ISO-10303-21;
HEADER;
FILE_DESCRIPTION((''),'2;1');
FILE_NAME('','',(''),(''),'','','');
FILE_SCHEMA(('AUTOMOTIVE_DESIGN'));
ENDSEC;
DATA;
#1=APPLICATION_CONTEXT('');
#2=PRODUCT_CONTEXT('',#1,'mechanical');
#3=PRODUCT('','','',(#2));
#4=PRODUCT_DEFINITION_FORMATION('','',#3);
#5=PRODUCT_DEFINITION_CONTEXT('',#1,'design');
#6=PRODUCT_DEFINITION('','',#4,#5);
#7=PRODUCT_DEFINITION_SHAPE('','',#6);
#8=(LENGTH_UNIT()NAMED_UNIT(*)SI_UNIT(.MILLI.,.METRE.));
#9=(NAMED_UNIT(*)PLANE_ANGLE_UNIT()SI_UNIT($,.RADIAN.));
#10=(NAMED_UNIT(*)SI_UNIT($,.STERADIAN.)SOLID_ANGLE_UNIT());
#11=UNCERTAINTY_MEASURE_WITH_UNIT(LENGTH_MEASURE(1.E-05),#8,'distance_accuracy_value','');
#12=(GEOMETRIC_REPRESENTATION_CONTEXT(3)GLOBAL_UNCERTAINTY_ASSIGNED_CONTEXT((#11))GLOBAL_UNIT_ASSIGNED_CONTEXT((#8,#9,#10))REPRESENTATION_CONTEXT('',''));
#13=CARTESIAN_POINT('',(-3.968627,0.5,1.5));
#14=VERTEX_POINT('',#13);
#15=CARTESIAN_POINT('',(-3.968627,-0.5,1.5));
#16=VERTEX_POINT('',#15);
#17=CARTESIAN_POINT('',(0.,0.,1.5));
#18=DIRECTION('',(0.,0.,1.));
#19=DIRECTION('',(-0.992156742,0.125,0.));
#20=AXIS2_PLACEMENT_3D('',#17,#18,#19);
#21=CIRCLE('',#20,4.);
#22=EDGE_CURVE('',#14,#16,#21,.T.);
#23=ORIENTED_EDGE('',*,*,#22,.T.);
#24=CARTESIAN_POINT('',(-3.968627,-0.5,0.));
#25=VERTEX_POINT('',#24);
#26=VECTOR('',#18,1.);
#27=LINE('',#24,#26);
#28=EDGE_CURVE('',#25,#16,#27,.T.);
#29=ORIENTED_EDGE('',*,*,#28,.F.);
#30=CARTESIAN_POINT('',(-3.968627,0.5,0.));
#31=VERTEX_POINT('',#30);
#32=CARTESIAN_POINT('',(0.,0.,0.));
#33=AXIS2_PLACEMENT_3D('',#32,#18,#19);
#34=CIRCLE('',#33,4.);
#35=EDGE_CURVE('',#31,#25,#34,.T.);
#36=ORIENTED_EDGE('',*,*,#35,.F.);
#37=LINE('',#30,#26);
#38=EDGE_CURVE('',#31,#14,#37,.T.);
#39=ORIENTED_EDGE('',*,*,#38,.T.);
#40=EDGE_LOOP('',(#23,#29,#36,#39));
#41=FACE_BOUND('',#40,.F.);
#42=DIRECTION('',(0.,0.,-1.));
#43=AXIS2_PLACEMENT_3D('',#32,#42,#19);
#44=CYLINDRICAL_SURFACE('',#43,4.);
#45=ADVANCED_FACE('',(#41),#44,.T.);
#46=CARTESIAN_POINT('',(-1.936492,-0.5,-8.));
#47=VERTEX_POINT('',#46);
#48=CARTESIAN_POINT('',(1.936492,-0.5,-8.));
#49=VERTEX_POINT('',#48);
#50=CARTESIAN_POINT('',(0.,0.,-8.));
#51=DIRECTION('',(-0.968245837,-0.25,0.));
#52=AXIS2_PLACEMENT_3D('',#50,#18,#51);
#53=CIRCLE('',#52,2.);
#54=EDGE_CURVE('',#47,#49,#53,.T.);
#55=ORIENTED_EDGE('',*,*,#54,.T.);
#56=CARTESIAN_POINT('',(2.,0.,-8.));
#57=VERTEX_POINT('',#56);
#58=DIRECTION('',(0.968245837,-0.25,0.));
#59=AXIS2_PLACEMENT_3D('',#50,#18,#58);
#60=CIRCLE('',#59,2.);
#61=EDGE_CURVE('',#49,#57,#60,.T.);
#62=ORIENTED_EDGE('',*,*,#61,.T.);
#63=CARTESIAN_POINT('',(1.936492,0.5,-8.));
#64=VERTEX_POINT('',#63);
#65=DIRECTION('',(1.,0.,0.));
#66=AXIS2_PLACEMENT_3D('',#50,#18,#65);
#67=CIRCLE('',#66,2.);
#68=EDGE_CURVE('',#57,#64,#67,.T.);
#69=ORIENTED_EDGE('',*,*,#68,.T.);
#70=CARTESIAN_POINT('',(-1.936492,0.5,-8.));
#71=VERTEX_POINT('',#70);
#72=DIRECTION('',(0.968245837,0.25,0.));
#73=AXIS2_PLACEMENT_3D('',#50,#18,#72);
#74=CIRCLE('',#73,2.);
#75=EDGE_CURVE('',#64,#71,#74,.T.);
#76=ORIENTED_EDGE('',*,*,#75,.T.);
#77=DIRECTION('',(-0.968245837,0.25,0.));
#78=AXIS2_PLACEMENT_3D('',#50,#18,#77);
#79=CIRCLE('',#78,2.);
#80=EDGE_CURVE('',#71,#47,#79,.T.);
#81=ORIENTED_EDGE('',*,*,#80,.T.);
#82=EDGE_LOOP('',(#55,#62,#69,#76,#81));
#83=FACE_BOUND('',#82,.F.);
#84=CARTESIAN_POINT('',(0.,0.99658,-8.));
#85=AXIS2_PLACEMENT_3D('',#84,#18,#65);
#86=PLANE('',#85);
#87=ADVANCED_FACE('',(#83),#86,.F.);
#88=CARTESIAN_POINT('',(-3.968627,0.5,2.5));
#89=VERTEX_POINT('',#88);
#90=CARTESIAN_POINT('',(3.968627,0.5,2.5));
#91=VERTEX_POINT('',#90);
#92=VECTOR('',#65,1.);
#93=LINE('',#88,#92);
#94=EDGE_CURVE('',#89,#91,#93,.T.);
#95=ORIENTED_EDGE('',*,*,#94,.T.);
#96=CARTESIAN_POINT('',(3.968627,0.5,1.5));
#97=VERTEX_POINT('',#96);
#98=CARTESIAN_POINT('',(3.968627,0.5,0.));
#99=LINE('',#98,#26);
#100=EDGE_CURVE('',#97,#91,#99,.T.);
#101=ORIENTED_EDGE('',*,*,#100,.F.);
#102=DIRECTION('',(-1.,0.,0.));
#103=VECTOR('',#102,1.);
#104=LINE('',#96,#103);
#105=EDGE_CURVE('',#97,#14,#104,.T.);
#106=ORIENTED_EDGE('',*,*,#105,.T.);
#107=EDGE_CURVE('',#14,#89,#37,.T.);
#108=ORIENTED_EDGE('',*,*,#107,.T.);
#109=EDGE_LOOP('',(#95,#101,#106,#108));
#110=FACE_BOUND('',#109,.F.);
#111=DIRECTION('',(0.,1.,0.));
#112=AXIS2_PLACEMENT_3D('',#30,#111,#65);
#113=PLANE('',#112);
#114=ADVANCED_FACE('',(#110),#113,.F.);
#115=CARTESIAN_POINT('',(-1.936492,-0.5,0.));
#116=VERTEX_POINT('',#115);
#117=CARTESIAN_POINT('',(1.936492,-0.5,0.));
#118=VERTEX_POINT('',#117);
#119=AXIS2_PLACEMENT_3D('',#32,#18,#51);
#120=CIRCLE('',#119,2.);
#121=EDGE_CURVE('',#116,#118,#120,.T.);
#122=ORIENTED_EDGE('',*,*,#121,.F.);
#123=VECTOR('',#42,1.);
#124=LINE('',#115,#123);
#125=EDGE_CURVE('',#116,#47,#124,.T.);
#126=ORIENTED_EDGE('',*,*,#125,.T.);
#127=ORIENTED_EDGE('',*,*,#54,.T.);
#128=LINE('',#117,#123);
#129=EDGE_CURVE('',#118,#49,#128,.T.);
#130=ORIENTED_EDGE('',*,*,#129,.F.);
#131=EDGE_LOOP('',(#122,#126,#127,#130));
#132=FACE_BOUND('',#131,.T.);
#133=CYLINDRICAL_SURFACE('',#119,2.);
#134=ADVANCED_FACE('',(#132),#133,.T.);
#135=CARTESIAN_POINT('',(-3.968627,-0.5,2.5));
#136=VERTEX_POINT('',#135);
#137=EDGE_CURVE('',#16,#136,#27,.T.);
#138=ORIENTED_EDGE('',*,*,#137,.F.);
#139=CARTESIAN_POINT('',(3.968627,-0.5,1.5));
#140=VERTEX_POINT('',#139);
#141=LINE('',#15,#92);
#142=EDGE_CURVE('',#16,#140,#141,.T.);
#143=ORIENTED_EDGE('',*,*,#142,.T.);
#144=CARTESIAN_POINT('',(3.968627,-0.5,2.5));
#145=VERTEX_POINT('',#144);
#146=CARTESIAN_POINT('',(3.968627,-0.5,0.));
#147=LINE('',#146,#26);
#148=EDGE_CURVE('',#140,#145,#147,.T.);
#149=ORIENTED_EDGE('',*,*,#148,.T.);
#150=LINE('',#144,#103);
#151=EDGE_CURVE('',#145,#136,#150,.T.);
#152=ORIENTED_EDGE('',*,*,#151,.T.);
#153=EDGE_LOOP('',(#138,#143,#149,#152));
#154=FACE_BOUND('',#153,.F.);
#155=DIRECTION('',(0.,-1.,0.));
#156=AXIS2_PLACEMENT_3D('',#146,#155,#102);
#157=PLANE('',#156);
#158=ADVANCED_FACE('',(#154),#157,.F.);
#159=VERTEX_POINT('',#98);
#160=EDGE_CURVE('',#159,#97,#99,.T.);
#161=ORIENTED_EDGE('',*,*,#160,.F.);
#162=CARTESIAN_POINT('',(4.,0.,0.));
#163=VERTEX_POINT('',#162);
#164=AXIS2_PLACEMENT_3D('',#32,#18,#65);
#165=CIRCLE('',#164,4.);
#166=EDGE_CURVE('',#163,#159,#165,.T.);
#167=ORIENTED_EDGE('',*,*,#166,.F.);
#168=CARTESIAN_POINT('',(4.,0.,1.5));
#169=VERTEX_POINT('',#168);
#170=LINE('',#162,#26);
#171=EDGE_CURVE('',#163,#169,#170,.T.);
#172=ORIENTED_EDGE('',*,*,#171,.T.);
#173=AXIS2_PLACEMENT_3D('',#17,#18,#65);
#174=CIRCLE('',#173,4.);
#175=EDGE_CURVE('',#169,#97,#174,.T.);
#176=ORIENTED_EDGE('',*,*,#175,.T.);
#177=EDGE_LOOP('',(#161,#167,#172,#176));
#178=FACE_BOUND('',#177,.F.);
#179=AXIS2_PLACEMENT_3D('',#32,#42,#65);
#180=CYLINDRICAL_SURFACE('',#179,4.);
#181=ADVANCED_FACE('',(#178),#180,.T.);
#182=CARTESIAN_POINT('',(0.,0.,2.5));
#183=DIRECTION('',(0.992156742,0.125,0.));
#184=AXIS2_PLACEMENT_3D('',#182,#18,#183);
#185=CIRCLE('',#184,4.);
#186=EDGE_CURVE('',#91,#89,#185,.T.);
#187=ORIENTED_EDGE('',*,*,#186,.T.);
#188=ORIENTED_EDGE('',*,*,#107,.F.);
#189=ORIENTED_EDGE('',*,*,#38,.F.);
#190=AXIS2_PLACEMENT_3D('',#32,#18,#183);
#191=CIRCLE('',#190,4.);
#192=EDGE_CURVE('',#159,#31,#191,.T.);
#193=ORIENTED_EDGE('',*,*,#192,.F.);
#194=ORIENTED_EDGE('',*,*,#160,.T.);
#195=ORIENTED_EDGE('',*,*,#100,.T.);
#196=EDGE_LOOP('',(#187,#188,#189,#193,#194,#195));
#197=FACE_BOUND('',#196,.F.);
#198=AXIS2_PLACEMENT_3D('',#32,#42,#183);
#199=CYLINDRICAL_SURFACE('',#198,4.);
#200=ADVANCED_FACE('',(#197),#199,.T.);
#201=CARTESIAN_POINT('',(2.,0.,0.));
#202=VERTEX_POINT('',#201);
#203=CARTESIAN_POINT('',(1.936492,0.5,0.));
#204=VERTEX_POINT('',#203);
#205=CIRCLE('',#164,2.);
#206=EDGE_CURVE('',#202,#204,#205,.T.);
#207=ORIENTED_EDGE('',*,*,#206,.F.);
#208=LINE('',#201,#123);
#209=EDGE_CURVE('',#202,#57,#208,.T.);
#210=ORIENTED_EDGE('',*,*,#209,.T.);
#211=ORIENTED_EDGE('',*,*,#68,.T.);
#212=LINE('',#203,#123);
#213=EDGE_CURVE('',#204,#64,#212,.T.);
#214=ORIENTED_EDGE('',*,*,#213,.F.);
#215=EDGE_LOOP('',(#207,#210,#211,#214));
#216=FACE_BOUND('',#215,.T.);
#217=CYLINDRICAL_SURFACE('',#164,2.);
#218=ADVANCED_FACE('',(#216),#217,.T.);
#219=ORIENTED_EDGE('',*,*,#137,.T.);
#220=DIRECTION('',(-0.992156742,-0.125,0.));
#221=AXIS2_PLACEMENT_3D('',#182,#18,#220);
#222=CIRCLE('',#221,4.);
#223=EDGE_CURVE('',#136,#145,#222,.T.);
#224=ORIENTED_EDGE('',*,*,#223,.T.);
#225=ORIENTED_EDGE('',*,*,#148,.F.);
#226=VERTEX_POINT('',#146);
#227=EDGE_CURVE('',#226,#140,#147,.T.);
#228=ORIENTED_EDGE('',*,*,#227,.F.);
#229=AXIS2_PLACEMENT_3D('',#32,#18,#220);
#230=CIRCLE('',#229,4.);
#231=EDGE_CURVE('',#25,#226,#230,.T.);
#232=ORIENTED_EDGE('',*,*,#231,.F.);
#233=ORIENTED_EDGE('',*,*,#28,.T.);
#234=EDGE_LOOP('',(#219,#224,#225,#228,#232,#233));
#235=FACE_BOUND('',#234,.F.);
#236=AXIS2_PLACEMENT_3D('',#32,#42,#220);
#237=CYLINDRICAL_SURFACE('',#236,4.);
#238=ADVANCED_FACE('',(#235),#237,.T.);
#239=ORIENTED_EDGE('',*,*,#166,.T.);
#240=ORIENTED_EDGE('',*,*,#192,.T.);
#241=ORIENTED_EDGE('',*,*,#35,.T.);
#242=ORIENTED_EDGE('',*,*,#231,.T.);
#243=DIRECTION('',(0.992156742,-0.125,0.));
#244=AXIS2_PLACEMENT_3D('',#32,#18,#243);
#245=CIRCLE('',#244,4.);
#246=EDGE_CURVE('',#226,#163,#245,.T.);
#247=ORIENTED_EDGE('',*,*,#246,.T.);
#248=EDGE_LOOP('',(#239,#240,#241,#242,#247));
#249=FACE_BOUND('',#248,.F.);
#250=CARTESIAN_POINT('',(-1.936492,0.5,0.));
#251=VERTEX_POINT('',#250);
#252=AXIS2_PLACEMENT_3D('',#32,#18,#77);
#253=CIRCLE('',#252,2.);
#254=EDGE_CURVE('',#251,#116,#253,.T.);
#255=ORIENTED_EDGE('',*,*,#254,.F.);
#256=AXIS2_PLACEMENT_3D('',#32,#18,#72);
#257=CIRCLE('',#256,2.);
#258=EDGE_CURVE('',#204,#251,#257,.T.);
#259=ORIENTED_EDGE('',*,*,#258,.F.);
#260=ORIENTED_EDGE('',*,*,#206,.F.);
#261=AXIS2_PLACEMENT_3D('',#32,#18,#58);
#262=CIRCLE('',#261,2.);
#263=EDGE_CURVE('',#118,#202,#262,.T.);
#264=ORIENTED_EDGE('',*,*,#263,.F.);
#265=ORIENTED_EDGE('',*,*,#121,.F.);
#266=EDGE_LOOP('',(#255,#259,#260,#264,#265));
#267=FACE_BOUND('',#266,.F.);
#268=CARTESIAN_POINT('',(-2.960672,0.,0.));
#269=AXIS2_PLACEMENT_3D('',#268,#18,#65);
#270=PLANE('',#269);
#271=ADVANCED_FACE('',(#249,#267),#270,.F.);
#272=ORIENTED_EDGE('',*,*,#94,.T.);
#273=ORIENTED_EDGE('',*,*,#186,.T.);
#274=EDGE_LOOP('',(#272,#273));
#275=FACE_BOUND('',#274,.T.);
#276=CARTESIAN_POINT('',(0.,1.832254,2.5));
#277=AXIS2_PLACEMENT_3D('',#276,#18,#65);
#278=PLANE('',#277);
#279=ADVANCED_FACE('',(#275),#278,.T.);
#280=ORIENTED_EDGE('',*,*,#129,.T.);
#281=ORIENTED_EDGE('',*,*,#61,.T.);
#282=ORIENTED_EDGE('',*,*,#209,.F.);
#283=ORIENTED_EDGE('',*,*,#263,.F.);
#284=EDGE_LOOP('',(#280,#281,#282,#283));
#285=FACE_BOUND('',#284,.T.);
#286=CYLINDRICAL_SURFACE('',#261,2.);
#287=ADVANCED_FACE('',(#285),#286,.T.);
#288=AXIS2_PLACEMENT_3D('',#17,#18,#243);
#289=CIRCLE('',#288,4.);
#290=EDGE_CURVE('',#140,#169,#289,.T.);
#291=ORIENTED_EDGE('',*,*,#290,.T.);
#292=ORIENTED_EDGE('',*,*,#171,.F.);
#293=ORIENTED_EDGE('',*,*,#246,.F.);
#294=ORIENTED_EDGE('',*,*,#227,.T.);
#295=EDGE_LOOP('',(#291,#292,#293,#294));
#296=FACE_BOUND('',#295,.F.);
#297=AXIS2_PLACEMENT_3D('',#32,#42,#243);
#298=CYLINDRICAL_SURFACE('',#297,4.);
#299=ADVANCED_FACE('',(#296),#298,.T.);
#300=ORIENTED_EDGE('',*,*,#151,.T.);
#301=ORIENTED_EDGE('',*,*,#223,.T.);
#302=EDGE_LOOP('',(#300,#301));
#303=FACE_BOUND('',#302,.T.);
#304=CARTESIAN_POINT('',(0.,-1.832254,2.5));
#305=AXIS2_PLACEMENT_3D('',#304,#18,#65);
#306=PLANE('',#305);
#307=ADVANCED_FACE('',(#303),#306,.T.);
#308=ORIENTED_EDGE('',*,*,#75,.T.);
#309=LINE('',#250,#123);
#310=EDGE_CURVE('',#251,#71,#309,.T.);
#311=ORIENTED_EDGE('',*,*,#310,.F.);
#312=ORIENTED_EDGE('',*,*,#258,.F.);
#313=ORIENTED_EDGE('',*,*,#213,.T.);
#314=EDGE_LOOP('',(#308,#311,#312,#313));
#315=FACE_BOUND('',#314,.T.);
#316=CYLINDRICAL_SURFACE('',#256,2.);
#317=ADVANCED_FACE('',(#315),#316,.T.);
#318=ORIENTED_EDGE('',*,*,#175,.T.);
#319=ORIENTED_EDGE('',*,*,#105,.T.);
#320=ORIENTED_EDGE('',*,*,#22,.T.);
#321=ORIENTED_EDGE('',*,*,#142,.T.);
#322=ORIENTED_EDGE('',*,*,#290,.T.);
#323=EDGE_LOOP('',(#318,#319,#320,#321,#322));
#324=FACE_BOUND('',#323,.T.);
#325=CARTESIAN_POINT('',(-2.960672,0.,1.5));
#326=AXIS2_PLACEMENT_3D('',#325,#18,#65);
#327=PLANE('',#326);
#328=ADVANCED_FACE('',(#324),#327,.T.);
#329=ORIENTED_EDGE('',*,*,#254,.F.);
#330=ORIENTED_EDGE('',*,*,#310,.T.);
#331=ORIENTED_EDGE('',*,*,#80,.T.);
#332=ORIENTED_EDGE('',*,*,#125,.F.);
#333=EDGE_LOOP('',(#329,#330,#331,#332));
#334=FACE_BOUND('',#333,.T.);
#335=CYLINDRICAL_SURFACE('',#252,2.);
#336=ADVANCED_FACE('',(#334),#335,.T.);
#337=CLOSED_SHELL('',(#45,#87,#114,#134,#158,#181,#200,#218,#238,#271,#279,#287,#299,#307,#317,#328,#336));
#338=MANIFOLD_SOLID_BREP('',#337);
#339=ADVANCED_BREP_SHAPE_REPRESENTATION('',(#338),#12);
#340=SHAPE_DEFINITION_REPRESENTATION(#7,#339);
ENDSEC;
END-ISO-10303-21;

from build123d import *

# Parameters (mm, degrees)
F1_DEPTH = 8
F2_DEPTH = 2.5
F3_DEPTH = 1.5


# Not quite as in the source:
# - a feature names something its author has since deleted; it is built from what else it names


with BuildPart() as f1:
    # F0 (on Top) → F1 (new body)
    with BuildSketch(Plane.XY):
        with BuildLine():
            Line((-1.9364916731, 0.5), (1.9364916731, 0.5))
            ThreePointArc((1.9364916731, 0.5), (0, 2), (-1.9364916731, 0.5))
        make_face()
        with BuildLine():
            ThreePointArc((2, 0), (1.9840593925, 0.252008585), (1.9364916731, 0.5))
            Line((1.9364916731, 0.5), (-1.9364916731, 0.5))
            ThreePointArc((-1.9364916731, 0.5), (-2, 0), (-1.9364916731, -0.5))
            Line((-1.9364916731, -0.5), (1.9364916731, -0.5))
            ThreePointArc((1.9364916731, -0.5), (1.9840593925, -0.252008585), (2, 0))
        make_face()
        with BuildLine():
            ThreePointArc((-1.9364916731, -0.5), (0, -2), (1.9364916731, -0.5))
            Line((1.9364916731, -0.5), (-1.9364916731, -0.5))
        make_face()
    extrude(amount=-F1_DEPTH)

    # F0 (on Top) → F2 (join)
    with BuildSketch(Plane.XY):
        with BuildLine():
            ThreePointArc((-3.9686269666, -0.5), (0, -4), (3.9686269666, -0.5))
            Line((3.9686269666, -0.5), (1.9364916731, -0.5))
            ThreePointArc((1.9364916731, -0.5), (0, -2), (-1.9364916731, -0.5))
            Line((-1.9364916731, -0.5), (-3.9686269666, -0.5))
        make_face()
        with BuildLine():
            Line((1.9364916731, 0.5), (3.9686269666, 0.5))
            ThreePointArc((3.9686269666, 0.5), (0, 4), (-3.9686269666, 0.5))
            Line((-3.9686269666, 0.5), (-1.9364916731, 0.5))
            ThreePointArc((-1.9364916731, 0.5), (0, 2), (1.9364916731, 0.5))
        make_face()
        with BuildLine():
            Line((-1.9364916731, 0.5), (1.9364916731, 0.5))
            ThreePointArc((1.9364916731, 0.5), (0, 2), (-1.9364916731, 0.5))
        make_face()
        with BuildLine():
            ThreePointArc((-1.9364916731, -0.5), (0, -2), (1.9364916731, -0.5))
            Line((1.9364916731, -0.5), (-1.9364916731, -0.5))
        make_face()
    extrude(amount=F2_DEPTH)

    # F0 (on Top) → F3 (join)
    with BuildSketch(Plane.XY):
        with BuildLine():
            Line((-1.9364916731, 0.5), (-3.9686269666, 0.5))
            ThreePointArc((-3.9686269666, 0.5), (-4, 0), (-3.9686269666, -0.5))
            Line((-3.9686269666, -0.5), (-1.9364916731, -0.5))
            ThreePointArc((-1.9364916731, -0.5), (-2, 0), (-1.9364916731, 0.5))
        make_face()
        with BuildLine():
            ThreePointArc((2, 0), (1.9840593925, 0.252008585), (1.9364916731, 0.5))
            Line((1.9364916731, 0.5), (-1.9364916731, 0.5))
            ThreePointArc((-1.9364916731, 0.5), (-2, 0), (-1.9364916731, -0.5))
            Line((-1.9364916731, -0.5), (1.9364916731, -0.5))
            ThreePointArc((1.9364916731, -0.5), (1.9840593925, -0.252008585), (2, 0))
        make_face()
        with BuildLine():
            ThreePointArc((3.9686269666, -0.5), (3.9921490369, -0.2504916502), (4, 0))
            ThreePointArc((4, 0), (3.9921490369, 0.2504916502), (3.9686269666, 0.5))
            Line((3.9686269666, 0.5), (1.9364916731, 0.5))
            ThreePointArc((1.9364916731, 0.5), (1.9840593925, 0.252008585), (2, 0))
            ThreePointArc((2, 0), (1.9840593925, -0.252008585), (1.9364916731, -0.5))
            Line((1.9364916731, -0.5), (3.9686269666, -0.5))
        make_face()
    extrude(amount=F3_DEPTH)


solid = f1.part
